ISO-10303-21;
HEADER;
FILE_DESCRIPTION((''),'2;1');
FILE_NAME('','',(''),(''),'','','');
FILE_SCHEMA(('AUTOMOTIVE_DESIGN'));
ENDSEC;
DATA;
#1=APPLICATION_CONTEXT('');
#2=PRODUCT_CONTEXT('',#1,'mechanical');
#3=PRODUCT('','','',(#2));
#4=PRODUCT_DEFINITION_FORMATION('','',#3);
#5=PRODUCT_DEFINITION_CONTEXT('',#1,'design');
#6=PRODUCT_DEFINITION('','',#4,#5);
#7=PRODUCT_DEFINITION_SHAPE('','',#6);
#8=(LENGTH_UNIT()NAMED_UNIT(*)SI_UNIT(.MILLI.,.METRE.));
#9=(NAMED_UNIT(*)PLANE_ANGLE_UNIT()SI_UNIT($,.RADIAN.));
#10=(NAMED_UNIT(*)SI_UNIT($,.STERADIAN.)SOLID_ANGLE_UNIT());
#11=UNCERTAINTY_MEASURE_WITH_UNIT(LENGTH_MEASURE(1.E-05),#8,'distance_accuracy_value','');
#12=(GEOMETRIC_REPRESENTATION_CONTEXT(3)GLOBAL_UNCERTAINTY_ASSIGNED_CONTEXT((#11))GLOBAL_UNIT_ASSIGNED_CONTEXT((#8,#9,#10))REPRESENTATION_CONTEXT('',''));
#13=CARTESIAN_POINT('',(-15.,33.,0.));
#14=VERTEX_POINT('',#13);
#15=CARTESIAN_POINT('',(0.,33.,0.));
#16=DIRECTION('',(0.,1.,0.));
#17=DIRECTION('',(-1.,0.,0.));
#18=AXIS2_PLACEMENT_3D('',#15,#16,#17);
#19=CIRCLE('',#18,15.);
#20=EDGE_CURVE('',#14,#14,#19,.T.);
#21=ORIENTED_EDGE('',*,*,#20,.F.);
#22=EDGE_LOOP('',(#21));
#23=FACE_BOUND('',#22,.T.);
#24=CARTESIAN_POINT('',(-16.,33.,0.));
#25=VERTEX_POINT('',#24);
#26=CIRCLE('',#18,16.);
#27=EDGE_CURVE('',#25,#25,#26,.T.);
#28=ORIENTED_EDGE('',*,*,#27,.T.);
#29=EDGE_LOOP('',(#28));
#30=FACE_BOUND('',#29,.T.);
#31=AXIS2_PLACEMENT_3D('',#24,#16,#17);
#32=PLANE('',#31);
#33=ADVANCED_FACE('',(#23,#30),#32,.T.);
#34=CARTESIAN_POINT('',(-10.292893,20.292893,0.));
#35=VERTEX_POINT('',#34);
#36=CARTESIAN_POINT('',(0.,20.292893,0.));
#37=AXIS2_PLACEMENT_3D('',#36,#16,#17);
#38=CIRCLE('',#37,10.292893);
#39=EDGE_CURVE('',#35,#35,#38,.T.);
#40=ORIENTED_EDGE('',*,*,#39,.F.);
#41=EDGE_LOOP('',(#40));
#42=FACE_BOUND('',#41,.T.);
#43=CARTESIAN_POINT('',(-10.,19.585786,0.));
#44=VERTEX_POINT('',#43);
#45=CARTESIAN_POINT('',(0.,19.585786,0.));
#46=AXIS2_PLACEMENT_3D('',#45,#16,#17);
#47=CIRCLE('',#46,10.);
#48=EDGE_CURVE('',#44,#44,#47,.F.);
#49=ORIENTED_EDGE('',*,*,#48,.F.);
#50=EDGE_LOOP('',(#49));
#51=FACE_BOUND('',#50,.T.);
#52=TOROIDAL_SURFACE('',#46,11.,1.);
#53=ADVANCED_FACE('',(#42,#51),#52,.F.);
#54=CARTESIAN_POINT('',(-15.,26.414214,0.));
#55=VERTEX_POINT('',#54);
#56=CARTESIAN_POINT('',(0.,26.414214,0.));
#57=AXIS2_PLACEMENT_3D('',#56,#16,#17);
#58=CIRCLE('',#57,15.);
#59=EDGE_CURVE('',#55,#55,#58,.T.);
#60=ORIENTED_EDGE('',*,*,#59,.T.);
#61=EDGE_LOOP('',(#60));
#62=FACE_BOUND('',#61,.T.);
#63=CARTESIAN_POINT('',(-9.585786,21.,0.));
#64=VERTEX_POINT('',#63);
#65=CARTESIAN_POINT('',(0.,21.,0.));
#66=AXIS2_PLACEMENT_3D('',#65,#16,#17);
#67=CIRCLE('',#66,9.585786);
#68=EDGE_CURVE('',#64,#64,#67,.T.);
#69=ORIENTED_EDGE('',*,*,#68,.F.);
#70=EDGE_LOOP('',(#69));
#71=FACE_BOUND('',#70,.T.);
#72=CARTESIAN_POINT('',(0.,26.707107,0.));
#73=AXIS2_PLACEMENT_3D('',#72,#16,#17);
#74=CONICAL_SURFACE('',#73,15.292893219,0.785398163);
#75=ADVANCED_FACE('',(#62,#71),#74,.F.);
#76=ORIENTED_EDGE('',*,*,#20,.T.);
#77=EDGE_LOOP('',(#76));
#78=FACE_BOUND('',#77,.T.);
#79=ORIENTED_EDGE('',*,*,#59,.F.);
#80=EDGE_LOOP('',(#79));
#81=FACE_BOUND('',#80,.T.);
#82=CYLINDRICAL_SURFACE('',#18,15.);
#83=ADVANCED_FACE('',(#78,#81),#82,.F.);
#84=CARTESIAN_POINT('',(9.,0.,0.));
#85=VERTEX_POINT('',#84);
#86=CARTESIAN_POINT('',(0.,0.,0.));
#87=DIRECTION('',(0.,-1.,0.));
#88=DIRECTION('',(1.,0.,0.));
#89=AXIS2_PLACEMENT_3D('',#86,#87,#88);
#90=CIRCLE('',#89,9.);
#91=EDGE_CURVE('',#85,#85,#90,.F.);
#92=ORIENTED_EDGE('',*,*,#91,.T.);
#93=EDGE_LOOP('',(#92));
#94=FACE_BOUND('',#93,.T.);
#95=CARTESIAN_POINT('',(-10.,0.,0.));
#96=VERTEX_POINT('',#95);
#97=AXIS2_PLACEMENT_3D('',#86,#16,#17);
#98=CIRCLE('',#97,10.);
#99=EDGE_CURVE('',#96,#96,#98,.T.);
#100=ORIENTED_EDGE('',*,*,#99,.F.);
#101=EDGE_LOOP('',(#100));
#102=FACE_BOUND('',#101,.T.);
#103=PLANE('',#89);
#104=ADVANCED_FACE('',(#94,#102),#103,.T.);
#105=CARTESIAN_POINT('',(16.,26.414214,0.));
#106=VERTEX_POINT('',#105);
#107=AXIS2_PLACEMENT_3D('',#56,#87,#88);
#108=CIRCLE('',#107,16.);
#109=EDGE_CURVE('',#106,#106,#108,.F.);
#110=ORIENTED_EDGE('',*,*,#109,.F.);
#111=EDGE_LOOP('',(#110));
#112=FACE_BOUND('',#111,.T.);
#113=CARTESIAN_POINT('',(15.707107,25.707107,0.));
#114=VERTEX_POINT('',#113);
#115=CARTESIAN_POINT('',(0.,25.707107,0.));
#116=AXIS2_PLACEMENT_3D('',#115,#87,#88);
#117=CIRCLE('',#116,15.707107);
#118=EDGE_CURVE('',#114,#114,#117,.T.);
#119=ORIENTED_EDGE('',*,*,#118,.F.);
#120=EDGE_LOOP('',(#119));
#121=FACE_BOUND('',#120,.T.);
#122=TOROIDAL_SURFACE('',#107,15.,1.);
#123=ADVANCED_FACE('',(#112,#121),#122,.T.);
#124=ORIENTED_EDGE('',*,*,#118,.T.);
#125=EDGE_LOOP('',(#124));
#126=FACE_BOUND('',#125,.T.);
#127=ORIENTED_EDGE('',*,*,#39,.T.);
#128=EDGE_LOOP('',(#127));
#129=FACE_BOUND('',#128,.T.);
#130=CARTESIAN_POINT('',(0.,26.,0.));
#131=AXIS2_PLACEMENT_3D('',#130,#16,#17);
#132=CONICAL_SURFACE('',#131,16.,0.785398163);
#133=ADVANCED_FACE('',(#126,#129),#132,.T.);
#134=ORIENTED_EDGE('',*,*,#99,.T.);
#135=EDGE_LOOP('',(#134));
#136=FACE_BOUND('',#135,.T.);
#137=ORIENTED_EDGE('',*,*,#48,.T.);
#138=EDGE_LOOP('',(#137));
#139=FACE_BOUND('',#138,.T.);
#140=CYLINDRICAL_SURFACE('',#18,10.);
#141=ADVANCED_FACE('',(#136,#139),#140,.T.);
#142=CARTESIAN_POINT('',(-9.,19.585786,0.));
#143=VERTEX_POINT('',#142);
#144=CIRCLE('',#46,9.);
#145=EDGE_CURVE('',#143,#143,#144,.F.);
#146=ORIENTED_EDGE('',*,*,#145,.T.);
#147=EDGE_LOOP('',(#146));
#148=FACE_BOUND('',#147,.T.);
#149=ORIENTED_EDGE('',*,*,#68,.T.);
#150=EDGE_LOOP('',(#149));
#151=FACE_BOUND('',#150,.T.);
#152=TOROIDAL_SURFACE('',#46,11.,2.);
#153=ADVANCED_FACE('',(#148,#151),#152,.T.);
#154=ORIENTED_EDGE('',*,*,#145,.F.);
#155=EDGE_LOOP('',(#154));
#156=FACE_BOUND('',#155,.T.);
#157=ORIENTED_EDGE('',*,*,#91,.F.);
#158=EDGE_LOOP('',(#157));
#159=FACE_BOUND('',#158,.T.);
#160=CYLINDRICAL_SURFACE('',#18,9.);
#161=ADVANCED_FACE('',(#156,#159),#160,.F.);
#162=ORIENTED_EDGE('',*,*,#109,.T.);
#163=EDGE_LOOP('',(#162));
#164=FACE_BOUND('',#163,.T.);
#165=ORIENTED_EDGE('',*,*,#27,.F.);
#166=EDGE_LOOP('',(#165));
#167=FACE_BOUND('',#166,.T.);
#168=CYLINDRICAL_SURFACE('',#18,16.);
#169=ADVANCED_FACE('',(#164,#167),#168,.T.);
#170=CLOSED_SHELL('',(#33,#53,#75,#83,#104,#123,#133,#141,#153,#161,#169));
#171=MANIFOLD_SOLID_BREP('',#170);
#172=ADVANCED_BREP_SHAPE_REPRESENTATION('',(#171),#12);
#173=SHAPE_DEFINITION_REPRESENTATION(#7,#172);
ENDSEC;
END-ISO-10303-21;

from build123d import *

# Parameters (mm, degrees)
FILLET_1_R = 1
SHELL_1_T  = -1


with BuildPart() as part:
    # Эскиз1 → Повернуть1 (revolve)
    with BuildSketch(Plane.XY):
        Polygon((0, 0), (-10, 0), (-10, 20), (-16, 26), (-16, 33), (0, 33), align=None)
    revolve(axis=Axis((0, 33, 0), (0, -1, 0)))

    # Скругление1
    fillet_1_edges = [part.edges().sort_by_distance(p)[0] for p in [
        (16, 26, 0),
        (10, 20, 0),
    ]]
    fillet(fillet_1_edges, radius=FILLET_1_R)

    # Оболочка1
    shell_1_openings = [part.faces().sort_by_distance(p)[0] for p in [
        (0, 33, 0),
        (0, 0, 0),
    ]]
    offset(amount=SHELL_1_T, openings=shell_1_openings, kind=Kind.INTERSECTION)


solid = part.part
